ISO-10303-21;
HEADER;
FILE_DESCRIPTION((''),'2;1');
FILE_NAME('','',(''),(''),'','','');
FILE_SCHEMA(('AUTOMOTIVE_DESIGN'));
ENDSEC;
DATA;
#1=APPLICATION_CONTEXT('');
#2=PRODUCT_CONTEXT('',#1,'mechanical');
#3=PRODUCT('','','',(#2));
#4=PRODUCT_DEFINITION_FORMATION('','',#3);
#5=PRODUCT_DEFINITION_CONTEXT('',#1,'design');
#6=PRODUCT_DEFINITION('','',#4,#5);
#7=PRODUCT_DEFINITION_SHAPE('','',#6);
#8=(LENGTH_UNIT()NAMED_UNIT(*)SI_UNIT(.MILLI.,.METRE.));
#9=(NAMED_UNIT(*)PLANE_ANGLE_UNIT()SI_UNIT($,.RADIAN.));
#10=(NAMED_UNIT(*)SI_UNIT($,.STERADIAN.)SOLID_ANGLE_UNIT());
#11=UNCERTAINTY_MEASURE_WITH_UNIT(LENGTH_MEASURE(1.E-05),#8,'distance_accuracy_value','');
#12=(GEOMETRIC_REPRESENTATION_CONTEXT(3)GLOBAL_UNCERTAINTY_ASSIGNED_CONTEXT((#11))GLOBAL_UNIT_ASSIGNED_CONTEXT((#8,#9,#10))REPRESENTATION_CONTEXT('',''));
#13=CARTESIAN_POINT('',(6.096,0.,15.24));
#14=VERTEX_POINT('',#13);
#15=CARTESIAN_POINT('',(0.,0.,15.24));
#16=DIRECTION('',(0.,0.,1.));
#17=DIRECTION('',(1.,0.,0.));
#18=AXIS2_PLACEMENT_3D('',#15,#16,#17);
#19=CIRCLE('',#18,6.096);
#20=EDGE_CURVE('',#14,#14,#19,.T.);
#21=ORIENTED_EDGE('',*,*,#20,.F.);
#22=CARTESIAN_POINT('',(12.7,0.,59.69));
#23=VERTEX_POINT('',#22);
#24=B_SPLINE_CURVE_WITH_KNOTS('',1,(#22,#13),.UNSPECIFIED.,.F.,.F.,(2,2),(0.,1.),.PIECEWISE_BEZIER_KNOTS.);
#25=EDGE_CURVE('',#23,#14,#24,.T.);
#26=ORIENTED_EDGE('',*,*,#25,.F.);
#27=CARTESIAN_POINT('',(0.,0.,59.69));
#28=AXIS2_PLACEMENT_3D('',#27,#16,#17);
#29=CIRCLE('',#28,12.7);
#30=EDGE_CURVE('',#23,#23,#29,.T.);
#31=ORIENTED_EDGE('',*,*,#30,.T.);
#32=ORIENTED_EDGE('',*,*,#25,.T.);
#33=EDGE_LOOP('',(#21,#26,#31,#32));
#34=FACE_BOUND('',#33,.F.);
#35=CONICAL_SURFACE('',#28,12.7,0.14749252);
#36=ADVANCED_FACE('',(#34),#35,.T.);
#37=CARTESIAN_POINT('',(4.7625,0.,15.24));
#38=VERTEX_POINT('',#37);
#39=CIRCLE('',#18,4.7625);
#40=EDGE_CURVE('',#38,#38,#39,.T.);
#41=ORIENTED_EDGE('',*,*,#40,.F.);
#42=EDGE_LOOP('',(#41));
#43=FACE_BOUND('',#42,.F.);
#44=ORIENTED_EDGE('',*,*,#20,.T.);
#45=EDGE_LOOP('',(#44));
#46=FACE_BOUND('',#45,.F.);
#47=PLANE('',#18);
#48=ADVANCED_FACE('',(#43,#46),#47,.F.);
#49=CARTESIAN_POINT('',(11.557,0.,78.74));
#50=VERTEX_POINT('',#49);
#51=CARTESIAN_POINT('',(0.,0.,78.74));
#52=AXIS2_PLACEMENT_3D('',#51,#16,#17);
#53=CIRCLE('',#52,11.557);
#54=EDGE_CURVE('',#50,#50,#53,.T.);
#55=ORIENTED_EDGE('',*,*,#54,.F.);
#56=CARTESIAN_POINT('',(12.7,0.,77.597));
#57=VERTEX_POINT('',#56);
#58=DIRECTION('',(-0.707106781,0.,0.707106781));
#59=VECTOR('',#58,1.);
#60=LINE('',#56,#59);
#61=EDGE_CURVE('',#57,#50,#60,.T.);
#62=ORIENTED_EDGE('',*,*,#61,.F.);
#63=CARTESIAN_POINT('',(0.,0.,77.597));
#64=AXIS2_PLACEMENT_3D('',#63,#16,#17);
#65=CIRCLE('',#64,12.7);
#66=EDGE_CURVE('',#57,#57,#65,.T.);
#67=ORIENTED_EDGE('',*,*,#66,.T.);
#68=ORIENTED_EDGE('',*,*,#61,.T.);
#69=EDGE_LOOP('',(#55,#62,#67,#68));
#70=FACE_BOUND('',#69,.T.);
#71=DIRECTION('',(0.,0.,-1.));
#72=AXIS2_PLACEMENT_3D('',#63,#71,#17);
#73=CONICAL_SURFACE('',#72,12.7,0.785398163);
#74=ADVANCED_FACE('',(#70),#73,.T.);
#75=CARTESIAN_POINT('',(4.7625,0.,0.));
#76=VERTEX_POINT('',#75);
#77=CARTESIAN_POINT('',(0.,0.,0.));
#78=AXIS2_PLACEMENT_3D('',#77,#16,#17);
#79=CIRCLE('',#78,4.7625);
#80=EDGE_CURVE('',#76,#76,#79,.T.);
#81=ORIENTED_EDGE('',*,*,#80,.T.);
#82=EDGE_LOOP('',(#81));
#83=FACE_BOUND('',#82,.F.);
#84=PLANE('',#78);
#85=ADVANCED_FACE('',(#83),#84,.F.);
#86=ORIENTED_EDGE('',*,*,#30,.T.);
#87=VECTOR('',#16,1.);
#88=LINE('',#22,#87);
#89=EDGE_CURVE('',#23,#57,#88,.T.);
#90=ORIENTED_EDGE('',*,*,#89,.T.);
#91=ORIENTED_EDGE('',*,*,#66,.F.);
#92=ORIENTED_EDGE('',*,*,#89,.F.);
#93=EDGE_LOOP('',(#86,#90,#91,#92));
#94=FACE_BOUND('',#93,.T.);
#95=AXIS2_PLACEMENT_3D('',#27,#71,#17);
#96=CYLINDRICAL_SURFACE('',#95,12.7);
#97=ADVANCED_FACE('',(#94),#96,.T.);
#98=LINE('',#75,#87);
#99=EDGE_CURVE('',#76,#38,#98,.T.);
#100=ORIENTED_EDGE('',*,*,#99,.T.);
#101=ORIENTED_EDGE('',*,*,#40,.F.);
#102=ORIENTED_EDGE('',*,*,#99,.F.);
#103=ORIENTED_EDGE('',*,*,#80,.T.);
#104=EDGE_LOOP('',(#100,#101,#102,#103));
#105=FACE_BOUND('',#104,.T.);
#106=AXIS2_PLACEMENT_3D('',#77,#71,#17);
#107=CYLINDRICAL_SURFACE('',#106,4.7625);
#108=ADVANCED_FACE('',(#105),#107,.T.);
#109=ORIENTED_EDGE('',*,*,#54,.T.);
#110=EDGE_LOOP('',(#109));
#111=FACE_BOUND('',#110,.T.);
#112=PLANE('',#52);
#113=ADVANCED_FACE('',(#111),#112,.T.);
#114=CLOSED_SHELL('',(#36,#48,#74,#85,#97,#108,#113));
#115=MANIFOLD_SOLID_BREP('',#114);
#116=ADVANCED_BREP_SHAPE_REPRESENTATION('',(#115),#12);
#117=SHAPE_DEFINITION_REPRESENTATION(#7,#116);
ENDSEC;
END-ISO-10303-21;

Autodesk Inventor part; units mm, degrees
ref_plane "YZ Plane" through (0, 0, 0) normal (1, 0, 0) x (0, 1, 0)
ref_plane "XZ Plane" through (0, 0, 0) normal (0, 1, 0) x (-1, 0, 0)
ref_plane "XY Plane" through (0, 0, 0) normal (0, 0, 1) x (1, 0, 0)
sketch "Sketch1" plane through (0, 0, 0) normal (0, 0, 1) x (1, 0, 0)
  circle A0 centre (0, 0) radius 4.7625
  dimension "d0" = 9.525
extrude "Extrusion1" add sketch "Sketch1" along normal blind 15.24
sketch "Sketch2" plane through (0, 0, 15.24) normal (0, 0, 1) x (1, 0, 0)
  circle A0 centre (0, 0) radius 6.096
  dimension "d3" = 12.192
extrude "Extrusion2" add sketch "Sketch2" along normal blind 44.45
sketch "Sketch3" plane through (0, 0, 59.69) normal (0, 0, 1) x (1, 0, 0)
  circle A0 centre (0, 0) radius 12.7
  dimension "d7" = 25.4
loft "Loft1" add profiles "Sketch3" section 2 edges at (-6.096, 0, 15.24)
sketch "Sketch4" plane through (0, 0, 59.69) normal (0, 0, 1) x (1, 0, 0)
  circle A0 centre (0, 0) radius 12.7
extrude "Extrusion3" add sketch "Sketch4" along normal blind 19.05
chamfer "Chamfer1" distance 1.143 angle 45 1 edges at (-12.7, 0, 78.74)
properties part number "JB_CAD_FinalPt2"
